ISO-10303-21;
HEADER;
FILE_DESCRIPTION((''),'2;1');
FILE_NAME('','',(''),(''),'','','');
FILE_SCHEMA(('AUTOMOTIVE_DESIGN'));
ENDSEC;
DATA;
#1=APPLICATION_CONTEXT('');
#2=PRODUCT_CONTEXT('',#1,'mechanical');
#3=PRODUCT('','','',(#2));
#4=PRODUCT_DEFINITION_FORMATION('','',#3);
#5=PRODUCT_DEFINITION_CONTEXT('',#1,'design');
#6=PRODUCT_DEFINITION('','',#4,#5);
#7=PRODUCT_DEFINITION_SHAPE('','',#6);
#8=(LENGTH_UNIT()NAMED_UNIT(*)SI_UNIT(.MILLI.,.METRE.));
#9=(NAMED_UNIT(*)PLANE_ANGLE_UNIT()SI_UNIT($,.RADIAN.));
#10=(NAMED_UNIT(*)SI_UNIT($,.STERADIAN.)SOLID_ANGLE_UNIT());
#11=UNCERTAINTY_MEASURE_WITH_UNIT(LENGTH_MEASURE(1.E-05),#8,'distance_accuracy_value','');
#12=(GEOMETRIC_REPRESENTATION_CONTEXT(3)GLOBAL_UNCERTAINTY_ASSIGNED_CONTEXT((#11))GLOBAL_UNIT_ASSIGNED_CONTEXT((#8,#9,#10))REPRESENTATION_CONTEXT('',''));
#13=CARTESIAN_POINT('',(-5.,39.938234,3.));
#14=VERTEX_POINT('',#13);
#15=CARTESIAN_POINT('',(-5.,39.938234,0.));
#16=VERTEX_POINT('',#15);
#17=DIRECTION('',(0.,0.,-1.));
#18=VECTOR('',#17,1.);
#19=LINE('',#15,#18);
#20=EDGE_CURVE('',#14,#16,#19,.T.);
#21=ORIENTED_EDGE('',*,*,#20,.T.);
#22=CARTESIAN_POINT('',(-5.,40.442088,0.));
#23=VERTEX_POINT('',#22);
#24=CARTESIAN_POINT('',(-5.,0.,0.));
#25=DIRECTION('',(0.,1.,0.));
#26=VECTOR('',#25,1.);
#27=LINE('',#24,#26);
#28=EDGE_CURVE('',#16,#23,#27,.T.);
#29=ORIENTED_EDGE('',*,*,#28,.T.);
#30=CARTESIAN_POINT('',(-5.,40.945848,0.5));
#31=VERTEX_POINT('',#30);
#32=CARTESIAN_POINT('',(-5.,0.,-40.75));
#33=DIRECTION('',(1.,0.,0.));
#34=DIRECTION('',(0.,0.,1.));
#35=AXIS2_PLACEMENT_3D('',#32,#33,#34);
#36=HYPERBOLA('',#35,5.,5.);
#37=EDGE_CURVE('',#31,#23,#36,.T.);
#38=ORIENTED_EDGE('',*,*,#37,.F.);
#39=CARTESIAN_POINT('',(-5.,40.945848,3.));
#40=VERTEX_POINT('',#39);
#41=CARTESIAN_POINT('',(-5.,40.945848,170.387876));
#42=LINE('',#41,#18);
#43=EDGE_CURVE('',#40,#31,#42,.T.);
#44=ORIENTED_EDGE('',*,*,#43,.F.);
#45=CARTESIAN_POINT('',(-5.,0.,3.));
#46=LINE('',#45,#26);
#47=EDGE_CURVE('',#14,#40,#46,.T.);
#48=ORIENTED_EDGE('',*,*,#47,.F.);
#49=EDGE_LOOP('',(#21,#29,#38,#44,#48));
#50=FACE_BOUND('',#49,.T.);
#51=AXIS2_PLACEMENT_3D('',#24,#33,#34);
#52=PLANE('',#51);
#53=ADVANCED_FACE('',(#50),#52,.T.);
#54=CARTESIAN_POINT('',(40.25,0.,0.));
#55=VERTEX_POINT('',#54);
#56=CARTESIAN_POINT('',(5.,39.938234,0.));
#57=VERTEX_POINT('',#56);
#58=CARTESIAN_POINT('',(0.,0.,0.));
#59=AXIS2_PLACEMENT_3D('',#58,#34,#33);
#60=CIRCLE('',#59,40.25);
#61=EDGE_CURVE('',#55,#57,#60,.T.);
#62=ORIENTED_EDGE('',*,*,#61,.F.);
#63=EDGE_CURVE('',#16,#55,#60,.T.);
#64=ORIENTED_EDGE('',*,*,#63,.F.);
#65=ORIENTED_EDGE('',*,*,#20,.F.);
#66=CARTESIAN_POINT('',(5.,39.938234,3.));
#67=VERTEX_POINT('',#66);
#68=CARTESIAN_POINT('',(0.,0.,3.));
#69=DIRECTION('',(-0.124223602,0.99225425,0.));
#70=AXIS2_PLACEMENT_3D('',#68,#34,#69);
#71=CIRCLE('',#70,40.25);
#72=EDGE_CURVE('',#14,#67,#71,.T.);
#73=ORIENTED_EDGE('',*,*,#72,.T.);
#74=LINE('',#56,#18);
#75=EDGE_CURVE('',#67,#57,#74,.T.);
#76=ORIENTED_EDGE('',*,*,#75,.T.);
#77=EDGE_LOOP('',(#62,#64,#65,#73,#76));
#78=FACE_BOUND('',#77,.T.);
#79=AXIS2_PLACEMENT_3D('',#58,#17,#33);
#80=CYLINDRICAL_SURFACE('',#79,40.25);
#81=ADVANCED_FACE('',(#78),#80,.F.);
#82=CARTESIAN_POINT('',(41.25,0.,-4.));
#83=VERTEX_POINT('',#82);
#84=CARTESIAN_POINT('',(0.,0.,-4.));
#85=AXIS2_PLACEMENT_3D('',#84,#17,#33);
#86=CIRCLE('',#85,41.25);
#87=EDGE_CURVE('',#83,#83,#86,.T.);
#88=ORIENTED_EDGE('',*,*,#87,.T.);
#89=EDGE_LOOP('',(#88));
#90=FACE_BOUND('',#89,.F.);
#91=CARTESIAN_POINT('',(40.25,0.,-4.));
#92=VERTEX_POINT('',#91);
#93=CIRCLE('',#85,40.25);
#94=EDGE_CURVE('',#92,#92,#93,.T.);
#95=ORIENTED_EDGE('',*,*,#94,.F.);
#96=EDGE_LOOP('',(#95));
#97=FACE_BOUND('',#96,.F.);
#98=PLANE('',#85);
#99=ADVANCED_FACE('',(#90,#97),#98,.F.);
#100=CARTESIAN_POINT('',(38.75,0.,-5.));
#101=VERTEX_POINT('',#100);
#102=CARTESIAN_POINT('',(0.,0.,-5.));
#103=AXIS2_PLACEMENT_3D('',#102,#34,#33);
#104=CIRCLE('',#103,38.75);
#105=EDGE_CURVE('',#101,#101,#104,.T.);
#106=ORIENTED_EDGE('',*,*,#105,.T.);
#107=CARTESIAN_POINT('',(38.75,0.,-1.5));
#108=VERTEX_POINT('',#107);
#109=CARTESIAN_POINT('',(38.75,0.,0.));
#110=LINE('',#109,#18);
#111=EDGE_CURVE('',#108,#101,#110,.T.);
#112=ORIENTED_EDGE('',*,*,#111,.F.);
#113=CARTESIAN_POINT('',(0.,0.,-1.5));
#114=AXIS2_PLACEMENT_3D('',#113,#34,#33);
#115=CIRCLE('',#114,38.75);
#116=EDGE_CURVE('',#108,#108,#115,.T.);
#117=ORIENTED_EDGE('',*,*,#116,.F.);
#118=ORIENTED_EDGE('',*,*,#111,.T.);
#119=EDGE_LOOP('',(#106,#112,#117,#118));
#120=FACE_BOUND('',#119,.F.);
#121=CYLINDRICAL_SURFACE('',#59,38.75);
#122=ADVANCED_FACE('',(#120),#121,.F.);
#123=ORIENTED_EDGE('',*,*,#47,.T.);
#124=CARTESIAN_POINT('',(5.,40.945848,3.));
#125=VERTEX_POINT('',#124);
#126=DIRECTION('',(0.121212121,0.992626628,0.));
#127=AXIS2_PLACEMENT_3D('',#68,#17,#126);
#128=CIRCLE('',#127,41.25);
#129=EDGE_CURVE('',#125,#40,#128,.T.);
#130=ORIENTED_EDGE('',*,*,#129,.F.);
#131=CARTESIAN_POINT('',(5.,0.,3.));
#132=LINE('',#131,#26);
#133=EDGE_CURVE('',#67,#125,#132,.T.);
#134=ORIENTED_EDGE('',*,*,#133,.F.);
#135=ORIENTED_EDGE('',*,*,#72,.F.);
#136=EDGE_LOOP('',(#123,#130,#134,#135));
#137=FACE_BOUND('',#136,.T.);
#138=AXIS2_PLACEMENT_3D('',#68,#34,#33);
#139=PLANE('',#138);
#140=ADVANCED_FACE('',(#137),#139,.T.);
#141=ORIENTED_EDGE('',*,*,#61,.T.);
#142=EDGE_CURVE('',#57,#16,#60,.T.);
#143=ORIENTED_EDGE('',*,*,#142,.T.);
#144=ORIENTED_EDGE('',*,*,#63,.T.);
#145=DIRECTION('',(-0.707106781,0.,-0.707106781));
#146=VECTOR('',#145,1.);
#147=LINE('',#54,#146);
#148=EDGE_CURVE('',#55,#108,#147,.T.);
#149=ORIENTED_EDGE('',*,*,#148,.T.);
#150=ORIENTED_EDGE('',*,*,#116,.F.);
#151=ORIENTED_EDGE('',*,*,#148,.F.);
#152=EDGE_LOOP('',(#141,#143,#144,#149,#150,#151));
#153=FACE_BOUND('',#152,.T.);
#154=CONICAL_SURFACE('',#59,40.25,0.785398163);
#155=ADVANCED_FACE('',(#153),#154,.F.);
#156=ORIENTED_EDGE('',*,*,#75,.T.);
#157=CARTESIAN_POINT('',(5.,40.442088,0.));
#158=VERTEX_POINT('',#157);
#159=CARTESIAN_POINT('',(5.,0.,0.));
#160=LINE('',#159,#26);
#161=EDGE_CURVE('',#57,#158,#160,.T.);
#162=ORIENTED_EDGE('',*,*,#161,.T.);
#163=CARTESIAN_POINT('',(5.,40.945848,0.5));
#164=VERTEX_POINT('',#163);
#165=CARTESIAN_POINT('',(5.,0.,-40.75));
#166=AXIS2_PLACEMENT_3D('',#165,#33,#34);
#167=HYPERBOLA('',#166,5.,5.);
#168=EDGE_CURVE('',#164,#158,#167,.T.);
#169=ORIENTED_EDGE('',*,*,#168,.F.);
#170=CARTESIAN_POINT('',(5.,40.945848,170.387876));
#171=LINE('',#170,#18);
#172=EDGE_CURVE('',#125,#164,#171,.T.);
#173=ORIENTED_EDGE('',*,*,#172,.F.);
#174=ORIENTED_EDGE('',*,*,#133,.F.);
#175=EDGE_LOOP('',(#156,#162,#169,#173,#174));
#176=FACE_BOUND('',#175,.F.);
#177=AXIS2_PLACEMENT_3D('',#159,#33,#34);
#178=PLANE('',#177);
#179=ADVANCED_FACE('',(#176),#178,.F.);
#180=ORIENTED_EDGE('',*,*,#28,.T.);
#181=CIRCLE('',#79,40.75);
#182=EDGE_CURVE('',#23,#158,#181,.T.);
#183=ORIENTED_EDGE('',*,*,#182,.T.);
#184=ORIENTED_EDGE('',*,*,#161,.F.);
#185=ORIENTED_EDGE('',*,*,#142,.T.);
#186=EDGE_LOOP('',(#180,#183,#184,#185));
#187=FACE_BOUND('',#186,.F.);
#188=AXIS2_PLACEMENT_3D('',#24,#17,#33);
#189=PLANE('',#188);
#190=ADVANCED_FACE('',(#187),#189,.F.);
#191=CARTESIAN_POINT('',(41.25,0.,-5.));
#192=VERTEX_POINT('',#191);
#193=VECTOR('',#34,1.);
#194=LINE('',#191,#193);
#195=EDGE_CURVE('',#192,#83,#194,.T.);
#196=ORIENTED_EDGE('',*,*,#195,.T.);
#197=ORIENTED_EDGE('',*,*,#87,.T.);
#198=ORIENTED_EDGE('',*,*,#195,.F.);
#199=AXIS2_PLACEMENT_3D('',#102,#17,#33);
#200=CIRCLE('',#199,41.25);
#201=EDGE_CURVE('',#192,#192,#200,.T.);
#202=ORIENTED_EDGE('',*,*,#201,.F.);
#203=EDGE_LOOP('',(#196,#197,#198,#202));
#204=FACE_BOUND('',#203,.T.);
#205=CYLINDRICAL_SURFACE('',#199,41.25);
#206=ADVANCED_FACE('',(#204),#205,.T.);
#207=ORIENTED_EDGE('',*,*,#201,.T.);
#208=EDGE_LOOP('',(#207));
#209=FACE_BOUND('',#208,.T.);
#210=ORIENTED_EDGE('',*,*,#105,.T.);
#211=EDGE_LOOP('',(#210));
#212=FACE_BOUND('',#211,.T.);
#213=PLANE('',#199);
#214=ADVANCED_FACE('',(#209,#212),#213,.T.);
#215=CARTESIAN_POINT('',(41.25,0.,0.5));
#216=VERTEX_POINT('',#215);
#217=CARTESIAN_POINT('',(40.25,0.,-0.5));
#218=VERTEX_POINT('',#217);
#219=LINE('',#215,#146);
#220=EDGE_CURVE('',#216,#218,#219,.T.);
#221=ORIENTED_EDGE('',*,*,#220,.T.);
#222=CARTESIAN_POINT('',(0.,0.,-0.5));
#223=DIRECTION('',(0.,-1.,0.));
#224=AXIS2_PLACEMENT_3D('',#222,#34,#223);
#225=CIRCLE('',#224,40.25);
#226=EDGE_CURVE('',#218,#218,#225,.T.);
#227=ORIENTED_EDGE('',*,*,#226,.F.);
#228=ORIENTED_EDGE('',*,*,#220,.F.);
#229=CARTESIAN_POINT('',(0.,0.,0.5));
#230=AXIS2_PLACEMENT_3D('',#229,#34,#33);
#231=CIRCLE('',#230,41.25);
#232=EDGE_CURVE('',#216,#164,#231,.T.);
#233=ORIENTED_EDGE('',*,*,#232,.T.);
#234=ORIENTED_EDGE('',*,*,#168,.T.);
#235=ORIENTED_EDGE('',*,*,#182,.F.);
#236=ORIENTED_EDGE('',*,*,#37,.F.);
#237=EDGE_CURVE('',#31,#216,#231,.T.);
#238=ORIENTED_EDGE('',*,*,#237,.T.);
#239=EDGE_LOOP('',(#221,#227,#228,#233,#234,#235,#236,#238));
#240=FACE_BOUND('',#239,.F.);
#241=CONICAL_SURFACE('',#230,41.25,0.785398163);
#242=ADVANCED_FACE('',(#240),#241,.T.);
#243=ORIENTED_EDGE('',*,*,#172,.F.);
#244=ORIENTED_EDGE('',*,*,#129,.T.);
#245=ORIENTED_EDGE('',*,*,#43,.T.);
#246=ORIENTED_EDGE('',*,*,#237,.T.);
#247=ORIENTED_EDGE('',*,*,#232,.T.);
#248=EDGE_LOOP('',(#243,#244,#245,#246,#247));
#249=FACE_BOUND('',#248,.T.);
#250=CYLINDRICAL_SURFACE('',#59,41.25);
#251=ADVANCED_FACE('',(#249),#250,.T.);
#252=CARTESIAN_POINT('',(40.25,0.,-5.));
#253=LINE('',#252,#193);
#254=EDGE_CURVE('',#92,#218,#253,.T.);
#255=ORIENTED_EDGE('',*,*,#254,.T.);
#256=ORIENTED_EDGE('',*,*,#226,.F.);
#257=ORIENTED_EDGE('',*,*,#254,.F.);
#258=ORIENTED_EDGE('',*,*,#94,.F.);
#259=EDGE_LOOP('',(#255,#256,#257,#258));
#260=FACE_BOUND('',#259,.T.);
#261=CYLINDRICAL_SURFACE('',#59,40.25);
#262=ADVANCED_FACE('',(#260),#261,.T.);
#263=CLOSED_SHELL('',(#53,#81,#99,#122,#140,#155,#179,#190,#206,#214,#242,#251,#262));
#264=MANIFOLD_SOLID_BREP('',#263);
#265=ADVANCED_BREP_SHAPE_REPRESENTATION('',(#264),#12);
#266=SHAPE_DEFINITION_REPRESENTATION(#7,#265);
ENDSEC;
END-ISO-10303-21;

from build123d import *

# Parameters (mm, degrees)
F0_R          = 41.25
F0_R_2        = 40.25
F1_DEPTH      = 3
F1_DEPTH_BACK = 1
F0_R_3        = 38.75
F2_DEPTH      = 5
F3_S5_R       = 40.25
F3_T6_DEPTH   = 60
F3_S11_R      = 40.25
F3_T12_DEPTH  = 58
F4_R          = 41.25
F4_R_2        = 40.25
F5_DEPTH      = 1
F7_END_RADIUS = 41.25
F6_W          = 10
F6_H          = 3
F7_REACH      = 51.6913065089


# Not quite as in the source:
# - a fillet or chamfer that OpenCascade refuses, or shapes differently, is made with other operations: its cross-section is extruded or revolved along the edge and cut away or added


with BuildPart() as f1:
    # F0 (on Top) → F1 (new body, two sides)
    with BuildSketch(Plane.XY) as f1_sk:
        Circle(F0_R)
        Circle(F0_R_2, mode=Mode.SUBTRACT)
    extrude(amount=F1_DEPTH)
    extrude(f1_sk.sketch, amount=-F1_DEPTH_BACK)

    # F0 (on Top) → F2 (join)
    with BuildSketch(Plane.XY):
        Circle(F0_R_2)
        Circle(F0_R_3, mode=Mode.SUBTRACT)
    extrude(amount=-F2_DEPTH)

    # F3: chamfer of 1.5 on 2 edges, made by hand


with BuildPart() as f3_tool2:
    # F3_s3 → F3_t4 (revolve)
    with BuildSketch(Plane.XZ):
        Polygon((41.25, 0.5), (39.75, -1), (41.25, -1), align=None)
    revolve(axis=Axis((0, 0, -1), (0, 0, 1)))

    # F3_s5 → F3_t6 (cut, symmetric)
    with BuildSketch(Plane.XY.offset(-0.3)):
        Circle(F3_S5_R)
    extrude(amount=F3_T6_DEPTH, both=True, mode=Mode.SUBTRACT)


with BuildPart() as f1_1:
    add(f1.part)

    # F3_t1: cut F3_tool2
    add(f3_tool2.part, mode=Mode.SUBTRACT)


with BuildPart() as f3_tool8:
    # F3_s9 → F3_t10 (revolve)
    with BuildSketch(Plane.XZ):
        Polygon((40.25, 0), (38.75, -1.5), (38.75, 0), align=None)
    revolve(axis=Axis((0, 0, 0), (0, 0, 1)))

    # F3_s11 → F3_t12 (intersect, symmetric)
    with BuildSketch(Plane.XY.offset(-0.8)):
        Circle(F3_S11_R)
    extrude(amount=F3_T12_DEPTH, both=True, mode=Mode.INTERSECT)


with BuildPart() as f1_2:
    add(f1_1.part)

    # F3_t7: cut F3_tool8
    add(f3_tool8.part, mode=Mode.SUBTRACT)

    # F4 (on face) → F5 (join)
    with BuildSketch(Plane(origin=(0, 0, -5), x_dir=(1, 0, 0), z_dir=(0, 0, -1))):
        Circle(F4_R)
        Circle(F4_R_2, mode=Mode.SUBTRACT)
    extrude(amount=-F5_DEPTH)

    f7_end = (Plane(origin=(0, 0, 1.75), x_dir=(-1, 0, 0), z_dir=(0, 0, -1)) * Cylinder(F7_END_RADIUS, 337.2757510104, mode=Mode.PRIVATE)).faces().sort_by_distance((-41.25, 0, 1.75))[0]
    # F6 (on Front) → F7 (cut, up to the whole of a round face its end follows)
    with BuildSketch(Plane.XZ):
        with Locations((0, 1.5)):
            Rectangle(F6_W, F6_H)
    f7_long = extrude(amount=-F7_REACH, mode=Mode.PRIVATE)
    add(split(f7_long, bisect_by=f7_end, keep=Keep.BOTTOM, mode=Mode.PRIVATE), mode=Mode.SUBTRACT)


solid = f1_2.part
